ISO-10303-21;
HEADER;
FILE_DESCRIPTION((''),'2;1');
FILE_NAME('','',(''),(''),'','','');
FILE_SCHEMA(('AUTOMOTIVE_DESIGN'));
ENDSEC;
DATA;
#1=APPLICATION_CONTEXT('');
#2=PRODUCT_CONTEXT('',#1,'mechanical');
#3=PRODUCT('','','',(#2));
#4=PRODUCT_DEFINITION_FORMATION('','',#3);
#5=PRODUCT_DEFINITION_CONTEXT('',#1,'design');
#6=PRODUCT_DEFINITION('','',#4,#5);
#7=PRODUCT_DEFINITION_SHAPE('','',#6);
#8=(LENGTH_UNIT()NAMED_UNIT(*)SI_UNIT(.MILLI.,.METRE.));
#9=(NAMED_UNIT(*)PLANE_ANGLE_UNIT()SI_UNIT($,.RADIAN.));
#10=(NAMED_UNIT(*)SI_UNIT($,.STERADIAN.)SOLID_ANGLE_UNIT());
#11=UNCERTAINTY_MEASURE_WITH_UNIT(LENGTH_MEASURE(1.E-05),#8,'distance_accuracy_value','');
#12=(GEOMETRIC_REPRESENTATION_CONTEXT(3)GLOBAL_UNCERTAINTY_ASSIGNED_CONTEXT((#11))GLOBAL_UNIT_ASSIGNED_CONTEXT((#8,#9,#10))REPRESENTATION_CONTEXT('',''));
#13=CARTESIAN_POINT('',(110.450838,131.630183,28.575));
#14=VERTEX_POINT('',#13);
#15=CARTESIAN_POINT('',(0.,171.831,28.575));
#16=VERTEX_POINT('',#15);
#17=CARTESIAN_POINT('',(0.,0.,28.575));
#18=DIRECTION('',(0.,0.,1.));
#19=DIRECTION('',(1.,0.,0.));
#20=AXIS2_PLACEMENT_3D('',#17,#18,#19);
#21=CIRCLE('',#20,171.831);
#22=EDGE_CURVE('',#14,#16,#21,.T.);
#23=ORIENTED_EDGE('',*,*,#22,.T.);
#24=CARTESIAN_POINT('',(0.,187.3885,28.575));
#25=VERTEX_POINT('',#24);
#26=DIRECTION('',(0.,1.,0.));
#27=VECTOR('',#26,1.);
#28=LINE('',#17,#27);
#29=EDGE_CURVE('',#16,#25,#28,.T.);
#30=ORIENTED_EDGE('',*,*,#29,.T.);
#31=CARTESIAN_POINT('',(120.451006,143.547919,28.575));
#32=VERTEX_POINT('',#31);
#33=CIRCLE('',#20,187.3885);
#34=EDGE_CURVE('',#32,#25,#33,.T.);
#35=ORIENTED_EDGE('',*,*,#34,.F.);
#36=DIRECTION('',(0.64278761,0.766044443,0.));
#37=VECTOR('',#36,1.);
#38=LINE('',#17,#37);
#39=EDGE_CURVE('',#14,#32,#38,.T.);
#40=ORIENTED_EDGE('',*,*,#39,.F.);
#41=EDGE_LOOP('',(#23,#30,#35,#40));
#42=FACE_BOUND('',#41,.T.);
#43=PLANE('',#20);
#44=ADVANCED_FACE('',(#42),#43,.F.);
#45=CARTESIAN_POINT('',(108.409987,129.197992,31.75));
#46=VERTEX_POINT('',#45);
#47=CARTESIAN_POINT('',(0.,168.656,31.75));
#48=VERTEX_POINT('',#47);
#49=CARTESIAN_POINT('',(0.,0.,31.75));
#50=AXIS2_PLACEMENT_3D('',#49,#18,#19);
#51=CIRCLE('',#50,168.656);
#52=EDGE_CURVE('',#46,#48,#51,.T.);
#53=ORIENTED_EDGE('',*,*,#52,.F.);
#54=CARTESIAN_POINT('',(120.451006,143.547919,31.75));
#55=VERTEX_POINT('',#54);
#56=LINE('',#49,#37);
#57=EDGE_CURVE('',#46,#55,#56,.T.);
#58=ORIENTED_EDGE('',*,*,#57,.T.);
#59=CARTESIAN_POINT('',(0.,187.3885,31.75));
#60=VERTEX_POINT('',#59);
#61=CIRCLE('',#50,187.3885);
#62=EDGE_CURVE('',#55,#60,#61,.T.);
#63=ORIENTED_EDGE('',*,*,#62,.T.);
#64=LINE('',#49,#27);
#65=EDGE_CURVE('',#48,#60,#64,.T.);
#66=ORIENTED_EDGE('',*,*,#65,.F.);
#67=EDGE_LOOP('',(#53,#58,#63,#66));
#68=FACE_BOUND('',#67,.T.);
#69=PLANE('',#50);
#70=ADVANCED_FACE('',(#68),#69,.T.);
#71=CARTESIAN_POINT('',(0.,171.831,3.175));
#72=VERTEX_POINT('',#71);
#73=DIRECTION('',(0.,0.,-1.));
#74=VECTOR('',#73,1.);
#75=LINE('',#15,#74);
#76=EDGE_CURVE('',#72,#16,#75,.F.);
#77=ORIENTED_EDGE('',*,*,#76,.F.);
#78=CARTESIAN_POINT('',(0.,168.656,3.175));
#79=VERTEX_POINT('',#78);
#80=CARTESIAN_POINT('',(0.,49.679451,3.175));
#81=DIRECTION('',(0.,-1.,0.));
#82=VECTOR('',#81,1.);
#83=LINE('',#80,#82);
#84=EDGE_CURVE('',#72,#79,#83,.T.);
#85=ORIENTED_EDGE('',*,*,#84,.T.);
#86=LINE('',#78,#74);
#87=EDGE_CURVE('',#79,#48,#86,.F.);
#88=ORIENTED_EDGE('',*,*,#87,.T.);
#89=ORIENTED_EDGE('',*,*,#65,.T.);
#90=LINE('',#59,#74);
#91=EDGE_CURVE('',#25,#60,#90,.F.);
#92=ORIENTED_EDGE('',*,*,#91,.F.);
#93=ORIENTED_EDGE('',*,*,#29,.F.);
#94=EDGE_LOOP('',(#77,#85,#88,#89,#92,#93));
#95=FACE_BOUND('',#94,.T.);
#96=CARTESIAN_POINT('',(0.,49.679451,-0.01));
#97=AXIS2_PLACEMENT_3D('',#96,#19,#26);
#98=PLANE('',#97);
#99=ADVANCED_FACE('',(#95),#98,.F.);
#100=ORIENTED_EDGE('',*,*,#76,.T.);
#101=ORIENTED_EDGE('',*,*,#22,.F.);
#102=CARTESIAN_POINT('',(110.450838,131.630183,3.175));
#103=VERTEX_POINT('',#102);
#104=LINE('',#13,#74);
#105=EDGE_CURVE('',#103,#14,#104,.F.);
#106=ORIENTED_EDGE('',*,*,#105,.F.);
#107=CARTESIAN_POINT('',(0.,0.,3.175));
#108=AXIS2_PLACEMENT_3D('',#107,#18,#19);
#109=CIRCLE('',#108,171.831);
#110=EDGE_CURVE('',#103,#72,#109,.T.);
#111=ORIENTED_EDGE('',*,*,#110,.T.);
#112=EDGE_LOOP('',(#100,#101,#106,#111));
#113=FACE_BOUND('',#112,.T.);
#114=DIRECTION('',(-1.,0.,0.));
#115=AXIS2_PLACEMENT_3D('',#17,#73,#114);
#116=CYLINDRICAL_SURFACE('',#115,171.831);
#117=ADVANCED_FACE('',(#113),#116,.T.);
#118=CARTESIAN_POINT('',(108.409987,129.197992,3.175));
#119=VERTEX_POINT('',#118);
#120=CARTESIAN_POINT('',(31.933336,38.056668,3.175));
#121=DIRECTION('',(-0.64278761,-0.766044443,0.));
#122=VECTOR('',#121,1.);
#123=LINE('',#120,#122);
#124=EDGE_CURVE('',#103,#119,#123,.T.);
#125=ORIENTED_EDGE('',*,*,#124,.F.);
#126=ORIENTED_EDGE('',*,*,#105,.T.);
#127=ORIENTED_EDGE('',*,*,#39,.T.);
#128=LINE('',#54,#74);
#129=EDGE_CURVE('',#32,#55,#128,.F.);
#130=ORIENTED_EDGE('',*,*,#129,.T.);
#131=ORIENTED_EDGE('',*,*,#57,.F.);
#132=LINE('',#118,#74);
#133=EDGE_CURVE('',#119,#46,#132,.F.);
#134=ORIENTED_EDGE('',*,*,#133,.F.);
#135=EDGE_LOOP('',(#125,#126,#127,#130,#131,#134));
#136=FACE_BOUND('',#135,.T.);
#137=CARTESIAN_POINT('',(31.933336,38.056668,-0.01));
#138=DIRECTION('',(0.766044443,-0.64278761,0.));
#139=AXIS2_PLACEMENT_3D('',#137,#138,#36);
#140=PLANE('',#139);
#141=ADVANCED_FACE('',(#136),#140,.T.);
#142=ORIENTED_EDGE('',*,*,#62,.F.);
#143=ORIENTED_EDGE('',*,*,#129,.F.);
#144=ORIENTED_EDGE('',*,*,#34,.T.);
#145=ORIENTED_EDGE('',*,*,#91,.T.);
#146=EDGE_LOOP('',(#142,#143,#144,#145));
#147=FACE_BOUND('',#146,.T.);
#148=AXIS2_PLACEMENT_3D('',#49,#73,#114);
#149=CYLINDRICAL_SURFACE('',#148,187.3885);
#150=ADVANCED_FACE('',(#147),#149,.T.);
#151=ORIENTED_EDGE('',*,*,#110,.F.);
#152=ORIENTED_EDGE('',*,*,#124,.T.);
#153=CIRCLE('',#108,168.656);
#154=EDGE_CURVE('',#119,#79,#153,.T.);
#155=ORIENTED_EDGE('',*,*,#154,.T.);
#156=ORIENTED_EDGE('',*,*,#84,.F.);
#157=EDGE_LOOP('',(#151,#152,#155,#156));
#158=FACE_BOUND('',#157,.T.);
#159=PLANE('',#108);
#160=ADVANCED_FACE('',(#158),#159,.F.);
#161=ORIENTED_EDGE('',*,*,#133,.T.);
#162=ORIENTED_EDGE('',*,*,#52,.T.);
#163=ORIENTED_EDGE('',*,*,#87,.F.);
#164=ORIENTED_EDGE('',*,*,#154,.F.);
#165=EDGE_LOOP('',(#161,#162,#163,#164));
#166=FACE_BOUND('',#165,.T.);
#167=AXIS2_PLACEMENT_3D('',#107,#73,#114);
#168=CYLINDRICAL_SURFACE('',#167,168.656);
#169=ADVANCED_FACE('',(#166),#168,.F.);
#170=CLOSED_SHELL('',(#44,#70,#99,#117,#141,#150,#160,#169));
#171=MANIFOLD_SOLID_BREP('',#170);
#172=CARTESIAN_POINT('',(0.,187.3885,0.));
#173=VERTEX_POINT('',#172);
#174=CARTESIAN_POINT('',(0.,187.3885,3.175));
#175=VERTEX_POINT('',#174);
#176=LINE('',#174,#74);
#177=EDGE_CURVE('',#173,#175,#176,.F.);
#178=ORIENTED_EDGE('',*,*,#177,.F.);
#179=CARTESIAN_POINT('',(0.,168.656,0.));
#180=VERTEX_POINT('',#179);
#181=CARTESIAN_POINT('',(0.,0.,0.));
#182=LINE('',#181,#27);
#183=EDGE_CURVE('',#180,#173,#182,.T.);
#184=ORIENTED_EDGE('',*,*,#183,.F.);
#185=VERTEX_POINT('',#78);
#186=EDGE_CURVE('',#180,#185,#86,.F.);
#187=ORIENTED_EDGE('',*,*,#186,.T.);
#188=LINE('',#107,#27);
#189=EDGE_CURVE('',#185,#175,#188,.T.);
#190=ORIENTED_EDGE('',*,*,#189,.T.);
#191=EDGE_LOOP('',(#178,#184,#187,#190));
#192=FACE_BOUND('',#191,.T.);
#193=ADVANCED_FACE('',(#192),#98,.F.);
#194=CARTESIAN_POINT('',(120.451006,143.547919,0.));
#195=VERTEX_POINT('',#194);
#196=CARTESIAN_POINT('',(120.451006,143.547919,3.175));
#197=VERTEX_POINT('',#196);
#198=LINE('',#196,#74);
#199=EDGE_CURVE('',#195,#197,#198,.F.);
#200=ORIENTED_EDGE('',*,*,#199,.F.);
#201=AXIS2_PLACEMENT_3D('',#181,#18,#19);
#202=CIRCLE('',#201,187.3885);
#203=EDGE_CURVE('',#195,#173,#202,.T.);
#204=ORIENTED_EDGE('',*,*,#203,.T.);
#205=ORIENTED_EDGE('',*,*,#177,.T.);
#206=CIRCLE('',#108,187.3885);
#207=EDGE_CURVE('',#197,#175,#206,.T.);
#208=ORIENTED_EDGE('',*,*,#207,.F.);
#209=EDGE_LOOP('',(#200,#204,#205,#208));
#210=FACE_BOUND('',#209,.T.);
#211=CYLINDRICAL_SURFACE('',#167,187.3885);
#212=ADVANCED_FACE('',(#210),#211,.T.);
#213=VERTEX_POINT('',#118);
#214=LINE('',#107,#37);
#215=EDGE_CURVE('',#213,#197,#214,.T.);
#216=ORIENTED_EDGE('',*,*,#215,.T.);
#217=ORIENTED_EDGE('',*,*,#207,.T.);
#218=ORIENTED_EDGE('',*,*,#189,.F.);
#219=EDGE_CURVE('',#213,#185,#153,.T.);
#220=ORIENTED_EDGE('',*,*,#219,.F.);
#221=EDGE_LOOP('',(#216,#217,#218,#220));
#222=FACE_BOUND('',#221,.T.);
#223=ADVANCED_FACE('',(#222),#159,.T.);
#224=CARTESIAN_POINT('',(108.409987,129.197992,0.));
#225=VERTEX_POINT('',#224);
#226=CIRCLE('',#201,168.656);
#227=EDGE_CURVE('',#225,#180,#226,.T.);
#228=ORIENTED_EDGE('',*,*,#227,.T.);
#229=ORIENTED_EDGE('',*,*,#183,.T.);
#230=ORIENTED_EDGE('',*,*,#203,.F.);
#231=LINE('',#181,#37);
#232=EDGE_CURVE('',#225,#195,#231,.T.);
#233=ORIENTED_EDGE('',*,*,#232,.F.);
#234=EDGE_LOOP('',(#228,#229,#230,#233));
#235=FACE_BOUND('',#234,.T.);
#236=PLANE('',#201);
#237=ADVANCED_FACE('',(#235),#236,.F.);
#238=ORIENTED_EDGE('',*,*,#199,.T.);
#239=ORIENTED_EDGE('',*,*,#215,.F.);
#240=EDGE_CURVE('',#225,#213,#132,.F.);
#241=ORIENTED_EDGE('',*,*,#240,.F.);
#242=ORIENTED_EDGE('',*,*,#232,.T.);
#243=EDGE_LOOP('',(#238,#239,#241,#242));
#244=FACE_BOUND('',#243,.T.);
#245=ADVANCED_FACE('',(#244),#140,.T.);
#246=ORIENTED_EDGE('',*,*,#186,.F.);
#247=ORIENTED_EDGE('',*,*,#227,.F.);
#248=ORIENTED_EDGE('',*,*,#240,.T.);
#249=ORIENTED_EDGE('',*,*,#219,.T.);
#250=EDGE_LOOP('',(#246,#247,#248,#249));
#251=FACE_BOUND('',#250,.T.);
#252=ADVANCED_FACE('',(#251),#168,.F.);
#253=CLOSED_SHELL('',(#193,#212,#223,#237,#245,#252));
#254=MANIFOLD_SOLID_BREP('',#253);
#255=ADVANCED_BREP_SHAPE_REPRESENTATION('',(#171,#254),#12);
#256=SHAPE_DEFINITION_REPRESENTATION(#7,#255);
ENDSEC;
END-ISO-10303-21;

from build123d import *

# Parameters (mm, degrees)
STOCK_BEARINGHOLDER_1_ANGLE = 40


# Read off the part's stored shape, not the designer's step: Stock-BearingHolder-1
with BuildPart() as part:
    # Stock-BearingHolder-1 outline → Stock-BearingHolder-1 (revolve)
    with BuildSketch(Plane(origin=(0, 0, 0), x_dir=(0.6427876096865552, 0.7660444431189647, 0), z_dir=(0.7660444431189647, -0.6427876096865552, 0))):
        Polygon((168.656, 31.75), (168.656, 0), (187.3885, 0), (187.3885, 3.175), (171.831, 3.175), (171.831, 28.575), (187.3885, 28.575), (187.3885, 31.75), align=None)
    revolve(axis=Axis((0, 0, 0), (0, 0, 1)), revolution_arc=STOCK_BEARINGHOLDER_1_ANGLE)


with BuildPart() as body_2:
    # Split1: the piece on the far side of the plane
    add(part.part)
    split(bisect_by=Plane.XY.offset(3.175), keep=Keep.BOTTOM)


with BuildPart() as part_1:
    add(part.part)

    # Split1
    split(bisect_by=Plane.XY.offset(3.175), keep=Keep.TOP)


solid = Compound([body_2.part, part_1.part])
